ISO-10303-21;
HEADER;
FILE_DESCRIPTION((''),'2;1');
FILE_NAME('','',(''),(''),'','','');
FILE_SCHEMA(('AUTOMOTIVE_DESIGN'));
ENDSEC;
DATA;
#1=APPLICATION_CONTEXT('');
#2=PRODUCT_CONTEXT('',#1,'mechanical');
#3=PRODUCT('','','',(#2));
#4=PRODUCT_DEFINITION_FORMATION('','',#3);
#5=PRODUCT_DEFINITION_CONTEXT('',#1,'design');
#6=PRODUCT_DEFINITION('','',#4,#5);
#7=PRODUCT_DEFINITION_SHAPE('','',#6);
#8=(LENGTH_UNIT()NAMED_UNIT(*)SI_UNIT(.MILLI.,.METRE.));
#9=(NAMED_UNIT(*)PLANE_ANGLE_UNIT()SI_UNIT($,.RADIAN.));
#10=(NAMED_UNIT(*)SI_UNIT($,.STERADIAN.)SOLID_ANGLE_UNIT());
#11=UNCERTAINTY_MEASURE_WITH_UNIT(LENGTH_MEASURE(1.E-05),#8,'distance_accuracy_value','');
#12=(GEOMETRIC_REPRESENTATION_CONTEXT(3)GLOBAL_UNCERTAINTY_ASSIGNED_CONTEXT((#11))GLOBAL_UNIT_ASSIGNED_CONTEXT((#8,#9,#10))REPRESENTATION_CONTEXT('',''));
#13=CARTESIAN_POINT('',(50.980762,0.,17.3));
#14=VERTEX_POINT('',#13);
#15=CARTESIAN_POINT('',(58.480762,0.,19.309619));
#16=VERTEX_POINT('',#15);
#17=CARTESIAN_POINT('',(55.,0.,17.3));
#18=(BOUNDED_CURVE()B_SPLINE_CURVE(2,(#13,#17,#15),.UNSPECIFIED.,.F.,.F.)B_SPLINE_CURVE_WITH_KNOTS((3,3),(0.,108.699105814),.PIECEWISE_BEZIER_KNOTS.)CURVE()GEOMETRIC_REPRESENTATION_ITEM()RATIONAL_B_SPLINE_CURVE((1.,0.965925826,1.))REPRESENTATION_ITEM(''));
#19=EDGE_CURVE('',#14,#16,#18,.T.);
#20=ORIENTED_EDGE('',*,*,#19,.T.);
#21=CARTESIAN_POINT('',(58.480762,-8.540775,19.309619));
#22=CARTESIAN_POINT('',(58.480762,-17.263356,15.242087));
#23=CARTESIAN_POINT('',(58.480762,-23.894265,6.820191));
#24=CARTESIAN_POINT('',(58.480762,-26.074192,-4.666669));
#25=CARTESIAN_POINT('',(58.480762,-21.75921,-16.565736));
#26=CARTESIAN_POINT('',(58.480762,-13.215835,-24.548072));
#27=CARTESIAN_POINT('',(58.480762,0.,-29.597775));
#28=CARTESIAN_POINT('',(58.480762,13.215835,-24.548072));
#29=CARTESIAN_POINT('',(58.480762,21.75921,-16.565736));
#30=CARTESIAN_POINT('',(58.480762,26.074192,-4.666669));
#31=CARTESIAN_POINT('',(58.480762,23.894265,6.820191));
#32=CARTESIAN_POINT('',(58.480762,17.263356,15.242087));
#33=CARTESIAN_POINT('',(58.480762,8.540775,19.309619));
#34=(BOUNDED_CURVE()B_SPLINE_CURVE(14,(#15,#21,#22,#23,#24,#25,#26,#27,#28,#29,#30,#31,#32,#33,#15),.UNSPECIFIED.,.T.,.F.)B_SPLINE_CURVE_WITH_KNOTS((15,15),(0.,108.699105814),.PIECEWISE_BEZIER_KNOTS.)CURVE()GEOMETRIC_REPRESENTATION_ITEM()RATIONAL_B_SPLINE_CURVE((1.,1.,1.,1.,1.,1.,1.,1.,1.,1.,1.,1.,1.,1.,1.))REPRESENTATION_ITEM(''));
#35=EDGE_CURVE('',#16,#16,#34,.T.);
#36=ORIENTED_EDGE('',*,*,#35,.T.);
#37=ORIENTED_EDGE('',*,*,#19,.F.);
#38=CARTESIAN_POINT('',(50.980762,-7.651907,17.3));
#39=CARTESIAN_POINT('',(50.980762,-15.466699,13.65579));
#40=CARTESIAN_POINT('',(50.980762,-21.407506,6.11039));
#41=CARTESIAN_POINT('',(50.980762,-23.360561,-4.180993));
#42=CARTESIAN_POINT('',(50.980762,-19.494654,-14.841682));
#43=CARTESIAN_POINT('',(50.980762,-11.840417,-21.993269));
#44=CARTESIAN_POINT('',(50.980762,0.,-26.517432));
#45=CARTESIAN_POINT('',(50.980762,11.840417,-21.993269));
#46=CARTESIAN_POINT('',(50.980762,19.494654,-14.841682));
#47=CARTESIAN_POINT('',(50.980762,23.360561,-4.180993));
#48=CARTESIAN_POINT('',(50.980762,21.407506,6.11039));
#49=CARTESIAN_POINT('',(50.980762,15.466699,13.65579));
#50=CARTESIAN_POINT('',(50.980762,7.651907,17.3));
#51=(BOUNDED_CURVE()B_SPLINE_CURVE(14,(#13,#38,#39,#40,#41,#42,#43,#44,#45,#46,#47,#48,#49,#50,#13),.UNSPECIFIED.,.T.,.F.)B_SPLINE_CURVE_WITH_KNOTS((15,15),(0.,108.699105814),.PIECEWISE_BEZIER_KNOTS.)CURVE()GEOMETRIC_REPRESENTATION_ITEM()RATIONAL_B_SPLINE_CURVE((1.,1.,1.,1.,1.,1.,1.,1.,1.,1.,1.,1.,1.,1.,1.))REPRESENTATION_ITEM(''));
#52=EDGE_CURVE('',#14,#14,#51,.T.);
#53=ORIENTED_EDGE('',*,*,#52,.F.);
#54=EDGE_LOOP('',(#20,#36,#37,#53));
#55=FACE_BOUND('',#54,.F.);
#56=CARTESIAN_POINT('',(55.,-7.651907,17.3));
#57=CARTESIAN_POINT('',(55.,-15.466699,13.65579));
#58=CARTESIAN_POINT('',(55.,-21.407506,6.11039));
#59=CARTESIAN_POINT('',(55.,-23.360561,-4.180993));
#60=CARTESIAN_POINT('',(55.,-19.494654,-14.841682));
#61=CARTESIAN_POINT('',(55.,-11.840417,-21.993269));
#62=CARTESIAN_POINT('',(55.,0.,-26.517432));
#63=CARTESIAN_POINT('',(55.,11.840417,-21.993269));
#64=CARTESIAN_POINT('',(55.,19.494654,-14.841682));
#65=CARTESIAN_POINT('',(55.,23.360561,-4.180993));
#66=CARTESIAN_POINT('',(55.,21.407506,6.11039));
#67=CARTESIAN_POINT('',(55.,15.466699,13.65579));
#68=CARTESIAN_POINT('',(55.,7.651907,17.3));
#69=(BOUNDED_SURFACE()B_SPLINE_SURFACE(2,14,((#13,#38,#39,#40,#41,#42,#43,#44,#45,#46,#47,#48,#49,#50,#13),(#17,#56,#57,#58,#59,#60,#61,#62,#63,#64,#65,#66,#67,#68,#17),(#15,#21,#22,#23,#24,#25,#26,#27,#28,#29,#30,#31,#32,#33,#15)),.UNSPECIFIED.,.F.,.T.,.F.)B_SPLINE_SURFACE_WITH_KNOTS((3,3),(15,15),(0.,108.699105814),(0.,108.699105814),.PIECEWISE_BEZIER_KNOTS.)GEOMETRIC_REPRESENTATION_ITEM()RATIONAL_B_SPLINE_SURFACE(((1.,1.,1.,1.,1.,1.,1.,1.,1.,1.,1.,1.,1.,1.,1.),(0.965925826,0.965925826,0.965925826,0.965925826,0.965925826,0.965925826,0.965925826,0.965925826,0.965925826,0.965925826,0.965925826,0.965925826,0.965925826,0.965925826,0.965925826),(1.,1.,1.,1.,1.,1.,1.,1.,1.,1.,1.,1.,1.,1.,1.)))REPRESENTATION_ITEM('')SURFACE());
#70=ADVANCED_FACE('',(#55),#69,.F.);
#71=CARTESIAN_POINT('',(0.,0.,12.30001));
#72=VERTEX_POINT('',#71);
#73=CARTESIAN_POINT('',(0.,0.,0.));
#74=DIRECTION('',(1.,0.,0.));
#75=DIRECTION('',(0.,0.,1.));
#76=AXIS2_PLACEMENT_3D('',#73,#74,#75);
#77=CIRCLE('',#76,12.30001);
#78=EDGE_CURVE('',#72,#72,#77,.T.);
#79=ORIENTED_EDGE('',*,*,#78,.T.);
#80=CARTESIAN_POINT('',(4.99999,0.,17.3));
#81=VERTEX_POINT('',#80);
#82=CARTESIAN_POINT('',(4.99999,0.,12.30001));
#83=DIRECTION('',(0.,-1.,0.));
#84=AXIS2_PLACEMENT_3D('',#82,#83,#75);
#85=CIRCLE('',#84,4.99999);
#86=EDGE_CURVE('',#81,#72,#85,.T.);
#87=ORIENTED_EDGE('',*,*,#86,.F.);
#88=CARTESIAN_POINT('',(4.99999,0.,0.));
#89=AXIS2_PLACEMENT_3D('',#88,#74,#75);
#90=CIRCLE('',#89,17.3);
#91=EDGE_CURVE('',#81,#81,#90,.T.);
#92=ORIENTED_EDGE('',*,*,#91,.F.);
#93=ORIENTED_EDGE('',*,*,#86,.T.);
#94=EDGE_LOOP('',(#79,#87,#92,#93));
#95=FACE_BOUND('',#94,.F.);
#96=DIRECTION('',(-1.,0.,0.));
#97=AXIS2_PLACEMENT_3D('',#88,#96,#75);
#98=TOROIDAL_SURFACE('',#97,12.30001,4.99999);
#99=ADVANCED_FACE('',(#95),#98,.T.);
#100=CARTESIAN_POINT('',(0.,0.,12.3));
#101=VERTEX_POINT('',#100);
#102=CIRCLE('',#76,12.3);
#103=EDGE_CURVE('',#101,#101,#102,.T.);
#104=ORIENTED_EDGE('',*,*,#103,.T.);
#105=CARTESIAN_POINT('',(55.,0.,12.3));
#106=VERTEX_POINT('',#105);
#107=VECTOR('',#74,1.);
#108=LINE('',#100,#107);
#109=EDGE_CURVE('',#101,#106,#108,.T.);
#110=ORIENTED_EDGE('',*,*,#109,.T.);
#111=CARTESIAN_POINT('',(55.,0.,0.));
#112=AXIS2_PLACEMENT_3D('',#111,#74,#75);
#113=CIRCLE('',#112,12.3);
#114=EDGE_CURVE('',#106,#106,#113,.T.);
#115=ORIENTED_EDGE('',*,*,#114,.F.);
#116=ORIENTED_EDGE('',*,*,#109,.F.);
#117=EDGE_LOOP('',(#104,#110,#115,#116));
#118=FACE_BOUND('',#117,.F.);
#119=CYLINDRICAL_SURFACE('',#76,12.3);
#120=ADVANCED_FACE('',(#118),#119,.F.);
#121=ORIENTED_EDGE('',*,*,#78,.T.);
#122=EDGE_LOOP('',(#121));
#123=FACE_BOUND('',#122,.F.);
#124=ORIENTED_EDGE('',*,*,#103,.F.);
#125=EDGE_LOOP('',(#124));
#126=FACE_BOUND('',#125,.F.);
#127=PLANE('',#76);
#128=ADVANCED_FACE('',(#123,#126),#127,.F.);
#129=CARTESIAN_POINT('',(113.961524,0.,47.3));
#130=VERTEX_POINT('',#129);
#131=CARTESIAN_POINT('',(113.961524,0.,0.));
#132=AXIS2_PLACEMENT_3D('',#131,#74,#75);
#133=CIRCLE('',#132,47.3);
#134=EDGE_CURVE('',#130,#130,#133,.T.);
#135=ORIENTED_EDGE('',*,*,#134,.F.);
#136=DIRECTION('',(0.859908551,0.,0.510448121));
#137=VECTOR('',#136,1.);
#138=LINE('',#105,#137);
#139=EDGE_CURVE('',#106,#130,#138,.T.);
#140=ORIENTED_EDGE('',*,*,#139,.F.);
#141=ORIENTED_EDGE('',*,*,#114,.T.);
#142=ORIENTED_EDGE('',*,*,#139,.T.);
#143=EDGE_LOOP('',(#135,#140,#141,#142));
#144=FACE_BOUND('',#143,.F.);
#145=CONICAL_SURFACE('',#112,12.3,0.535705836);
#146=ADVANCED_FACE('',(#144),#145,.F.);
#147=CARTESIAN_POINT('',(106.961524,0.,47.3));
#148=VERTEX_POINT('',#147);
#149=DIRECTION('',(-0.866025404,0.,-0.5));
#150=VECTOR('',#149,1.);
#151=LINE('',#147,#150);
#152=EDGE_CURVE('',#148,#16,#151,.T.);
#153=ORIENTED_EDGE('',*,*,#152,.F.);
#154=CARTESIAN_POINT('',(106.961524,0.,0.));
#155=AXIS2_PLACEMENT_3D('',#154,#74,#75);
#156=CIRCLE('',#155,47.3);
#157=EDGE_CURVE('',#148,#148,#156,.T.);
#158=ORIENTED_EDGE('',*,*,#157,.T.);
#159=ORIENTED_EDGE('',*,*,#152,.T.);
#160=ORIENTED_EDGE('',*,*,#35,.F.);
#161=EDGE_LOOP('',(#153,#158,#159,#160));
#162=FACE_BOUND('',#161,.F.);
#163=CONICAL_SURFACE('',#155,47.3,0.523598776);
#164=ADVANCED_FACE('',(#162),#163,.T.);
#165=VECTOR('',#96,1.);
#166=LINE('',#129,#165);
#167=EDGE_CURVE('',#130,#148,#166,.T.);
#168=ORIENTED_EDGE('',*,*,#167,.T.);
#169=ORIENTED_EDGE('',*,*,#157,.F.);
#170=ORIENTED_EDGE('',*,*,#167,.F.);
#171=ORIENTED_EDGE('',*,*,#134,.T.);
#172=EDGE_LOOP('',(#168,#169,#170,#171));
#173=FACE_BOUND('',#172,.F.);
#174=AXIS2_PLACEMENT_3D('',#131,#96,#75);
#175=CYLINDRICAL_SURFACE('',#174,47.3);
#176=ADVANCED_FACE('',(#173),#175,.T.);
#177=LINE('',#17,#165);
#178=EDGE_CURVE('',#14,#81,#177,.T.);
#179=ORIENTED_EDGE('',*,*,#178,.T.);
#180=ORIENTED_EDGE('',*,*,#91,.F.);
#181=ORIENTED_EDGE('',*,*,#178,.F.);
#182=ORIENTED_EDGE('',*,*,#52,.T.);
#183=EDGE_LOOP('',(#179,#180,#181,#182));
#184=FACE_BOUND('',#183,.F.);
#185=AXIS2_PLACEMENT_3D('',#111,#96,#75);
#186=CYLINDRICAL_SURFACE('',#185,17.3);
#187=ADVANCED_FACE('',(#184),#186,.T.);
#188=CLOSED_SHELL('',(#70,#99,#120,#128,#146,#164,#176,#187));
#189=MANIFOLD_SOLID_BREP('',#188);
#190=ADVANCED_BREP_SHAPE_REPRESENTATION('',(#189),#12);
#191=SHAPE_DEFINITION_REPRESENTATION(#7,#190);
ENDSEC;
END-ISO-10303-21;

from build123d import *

# Parameters (mm, degrees)
F2_R = 4.99999
F3_R = 15


# Not quite as in the source:
# - a fillet or chamfer is up to 0.001 mm smaller than in the source, because OpenCascade refuses the exact size


with BuildPart() as f1:
    # F0 (on Front) → F1 (revolve)
    with BuildSketch(Plane.XZ):
        Polygon((55, 17.3), (0, 17.3), (0, 12.3), (55, 12.3), (113.9615242271, 47.3), (106.9615242271, 47.3), align=None)
    revolve(axis=Axis((19.2044641059, 0, 0), (1, 0, 0)))

    # F2 (radius 5 in the source; OpenCascade refuses exactly that, so slightly less here)
    f2_edges = [f1.edges().sort_by_distance(p)[0] for p in [
        (0, 0, -17.3),
    ]]
    fillet(f2_edges, radius=F2_R)

    # F3
    f3_edges = [f1.edges().sort_by_distance(p)[0] for p in [
        (55, 0, -17.3),
    ]]
    fillet(f3_edges, radius=F3_R)


solid = f1.part
